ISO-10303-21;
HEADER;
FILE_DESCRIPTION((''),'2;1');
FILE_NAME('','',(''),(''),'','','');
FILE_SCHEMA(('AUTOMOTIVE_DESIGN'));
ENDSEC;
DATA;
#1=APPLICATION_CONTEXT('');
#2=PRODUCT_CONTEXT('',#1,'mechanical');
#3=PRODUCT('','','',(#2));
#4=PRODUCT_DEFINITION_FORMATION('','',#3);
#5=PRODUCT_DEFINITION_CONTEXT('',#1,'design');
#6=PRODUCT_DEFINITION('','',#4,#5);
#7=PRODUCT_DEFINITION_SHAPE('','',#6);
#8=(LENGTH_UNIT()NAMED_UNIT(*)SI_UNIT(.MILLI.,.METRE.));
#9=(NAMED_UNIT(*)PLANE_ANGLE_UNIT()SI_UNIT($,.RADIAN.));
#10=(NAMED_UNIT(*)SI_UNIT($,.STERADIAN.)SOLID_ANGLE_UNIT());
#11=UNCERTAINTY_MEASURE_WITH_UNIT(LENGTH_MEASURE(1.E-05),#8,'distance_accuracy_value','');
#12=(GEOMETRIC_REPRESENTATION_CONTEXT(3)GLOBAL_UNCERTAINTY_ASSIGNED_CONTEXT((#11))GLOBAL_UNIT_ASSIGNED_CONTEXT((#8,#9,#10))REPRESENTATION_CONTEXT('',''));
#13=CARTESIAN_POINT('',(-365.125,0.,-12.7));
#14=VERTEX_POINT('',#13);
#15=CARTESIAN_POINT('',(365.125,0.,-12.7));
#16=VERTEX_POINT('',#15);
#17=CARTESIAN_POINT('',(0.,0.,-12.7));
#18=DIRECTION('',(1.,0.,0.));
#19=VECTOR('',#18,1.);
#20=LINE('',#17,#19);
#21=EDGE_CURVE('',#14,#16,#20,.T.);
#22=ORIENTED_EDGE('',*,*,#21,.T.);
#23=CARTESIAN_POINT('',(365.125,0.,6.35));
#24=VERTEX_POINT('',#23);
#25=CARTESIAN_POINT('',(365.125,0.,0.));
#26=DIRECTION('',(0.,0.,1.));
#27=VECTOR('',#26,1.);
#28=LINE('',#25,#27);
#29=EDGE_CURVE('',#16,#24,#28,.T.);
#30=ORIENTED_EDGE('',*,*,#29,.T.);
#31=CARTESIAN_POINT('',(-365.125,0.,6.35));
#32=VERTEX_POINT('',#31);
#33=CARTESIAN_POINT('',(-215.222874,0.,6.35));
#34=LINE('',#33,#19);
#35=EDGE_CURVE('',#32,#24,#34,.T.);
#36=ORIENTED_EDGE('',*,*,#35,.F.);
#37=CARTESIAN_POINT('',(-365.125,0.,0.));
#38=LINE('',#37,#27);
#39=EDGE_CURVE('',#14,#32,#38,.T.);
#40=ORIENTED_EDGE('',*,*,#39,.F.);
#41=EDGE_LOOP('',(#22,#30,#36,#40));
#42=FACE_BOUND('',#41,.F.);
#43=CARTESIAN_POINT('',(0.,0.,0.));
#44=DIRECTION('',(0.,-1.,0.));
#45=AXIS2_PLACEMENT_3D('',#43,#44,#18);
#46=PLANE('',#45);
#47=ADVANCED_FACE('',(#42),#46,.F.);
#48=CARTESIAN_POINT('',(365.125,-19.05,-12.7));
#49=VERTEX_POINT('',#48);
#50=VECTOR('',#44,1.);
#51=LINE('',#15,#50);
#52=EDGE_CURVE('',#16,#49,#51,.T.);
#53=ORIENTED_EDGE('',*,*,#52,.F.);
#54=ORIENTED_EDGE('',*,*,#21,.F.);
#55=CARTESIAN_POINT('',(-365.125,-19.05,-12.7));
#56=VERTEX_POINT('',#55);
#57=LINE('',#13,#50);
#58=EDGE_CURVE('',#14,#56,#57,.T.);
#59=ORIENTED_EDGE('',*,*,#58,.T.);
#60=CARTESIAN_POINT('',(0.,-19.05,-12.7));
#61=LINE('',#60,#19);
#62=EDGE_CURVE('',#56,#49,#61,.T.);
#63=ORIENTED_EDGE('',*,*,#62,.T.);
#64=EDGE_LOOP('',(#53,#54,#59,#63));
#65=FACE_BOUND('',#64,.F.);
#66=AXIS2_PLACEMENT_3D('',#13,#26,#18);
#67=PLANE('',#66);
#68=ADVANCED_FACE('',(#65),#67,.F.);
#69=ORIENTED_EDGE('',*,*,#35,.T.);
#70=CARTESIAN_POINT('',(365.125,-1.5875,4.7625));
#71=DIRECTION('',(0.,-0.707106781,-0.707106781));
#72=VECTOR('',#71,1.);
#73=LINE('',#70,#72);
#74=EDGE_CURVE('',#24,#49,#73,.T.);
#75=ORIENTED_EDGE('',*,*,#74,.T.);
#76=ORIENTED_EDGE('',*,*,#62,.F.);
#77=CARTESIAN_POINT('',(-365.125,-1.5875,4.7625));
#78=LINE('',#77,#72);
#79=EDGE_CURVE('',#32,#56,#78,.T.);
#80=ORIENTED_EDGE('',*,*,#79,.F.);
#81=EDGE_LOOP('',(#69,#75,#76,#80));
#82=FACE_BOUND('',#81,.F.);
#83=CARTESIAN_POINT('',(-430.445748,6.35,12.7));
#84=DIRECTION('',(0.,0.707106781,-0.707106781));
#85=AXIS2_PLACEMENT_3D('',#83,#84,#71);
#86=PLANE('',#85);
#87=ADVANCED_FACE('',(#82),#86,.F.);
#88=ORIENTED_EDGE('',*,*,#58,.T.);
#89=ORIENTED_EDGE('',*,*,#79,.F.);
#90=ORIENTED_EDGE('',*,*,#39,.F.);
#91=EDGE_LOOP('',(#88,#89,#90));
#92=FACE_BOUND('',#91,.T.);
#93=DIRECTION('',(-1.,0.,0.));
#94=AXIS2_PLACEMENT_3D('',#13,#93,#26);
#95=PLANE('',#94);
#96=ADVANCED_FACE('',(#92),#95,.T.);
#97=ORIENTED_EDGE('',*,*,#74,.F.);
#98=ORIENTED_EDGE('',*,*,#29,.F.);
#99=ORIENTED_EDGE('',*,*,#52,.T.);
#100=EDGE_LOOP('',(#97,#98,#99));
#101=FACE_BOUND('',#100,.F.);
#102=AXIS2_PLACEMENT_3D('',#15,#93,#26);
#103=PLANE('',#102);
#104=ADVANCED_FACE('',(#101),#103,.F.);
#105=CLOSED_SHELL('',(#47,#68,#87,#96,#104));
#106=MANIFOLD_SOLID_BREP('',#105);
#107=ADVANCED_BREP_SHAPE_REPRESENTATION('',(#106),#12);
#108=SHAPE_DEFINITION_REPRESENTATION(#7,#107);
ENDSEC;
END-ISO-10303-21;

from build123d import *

# Parameters (mm, degrees)
F0_W        = 730.25
F0_H        = 25.4
F1_DEPTH    = 19.05
F2_T1_DEPTH = 860.8914957887


# Not quite as in the source:
# - a fillet or chamfer that OpenCascade refuses, or shapes differently, is made with other operations: its cross-section is extruded or revolved along the edge and cut away or added


with BuildPart() as f1:
    # F0 (on Front) → F1 (new body)
    with BuildSketch(Plane.XZ):
        Rectangle(F0_W, F0_H)
    extrude(amount=F1_DEPTH)

    # F2: chamfer of 25.4 on 1 edges, made by hand

    # F2_s2 → F2_t1 (cut)
    with BuildSketch(Plane.YZ.offset(-430.4457478943)):
        Polygon((6.35, 12.7), (-19.05, -12.7), (-19.05, 12.7), align=None)
    extrude(amount=F2_T1_DEPTH, mode=Mode.SUBTRACT)


solid = f1.part
